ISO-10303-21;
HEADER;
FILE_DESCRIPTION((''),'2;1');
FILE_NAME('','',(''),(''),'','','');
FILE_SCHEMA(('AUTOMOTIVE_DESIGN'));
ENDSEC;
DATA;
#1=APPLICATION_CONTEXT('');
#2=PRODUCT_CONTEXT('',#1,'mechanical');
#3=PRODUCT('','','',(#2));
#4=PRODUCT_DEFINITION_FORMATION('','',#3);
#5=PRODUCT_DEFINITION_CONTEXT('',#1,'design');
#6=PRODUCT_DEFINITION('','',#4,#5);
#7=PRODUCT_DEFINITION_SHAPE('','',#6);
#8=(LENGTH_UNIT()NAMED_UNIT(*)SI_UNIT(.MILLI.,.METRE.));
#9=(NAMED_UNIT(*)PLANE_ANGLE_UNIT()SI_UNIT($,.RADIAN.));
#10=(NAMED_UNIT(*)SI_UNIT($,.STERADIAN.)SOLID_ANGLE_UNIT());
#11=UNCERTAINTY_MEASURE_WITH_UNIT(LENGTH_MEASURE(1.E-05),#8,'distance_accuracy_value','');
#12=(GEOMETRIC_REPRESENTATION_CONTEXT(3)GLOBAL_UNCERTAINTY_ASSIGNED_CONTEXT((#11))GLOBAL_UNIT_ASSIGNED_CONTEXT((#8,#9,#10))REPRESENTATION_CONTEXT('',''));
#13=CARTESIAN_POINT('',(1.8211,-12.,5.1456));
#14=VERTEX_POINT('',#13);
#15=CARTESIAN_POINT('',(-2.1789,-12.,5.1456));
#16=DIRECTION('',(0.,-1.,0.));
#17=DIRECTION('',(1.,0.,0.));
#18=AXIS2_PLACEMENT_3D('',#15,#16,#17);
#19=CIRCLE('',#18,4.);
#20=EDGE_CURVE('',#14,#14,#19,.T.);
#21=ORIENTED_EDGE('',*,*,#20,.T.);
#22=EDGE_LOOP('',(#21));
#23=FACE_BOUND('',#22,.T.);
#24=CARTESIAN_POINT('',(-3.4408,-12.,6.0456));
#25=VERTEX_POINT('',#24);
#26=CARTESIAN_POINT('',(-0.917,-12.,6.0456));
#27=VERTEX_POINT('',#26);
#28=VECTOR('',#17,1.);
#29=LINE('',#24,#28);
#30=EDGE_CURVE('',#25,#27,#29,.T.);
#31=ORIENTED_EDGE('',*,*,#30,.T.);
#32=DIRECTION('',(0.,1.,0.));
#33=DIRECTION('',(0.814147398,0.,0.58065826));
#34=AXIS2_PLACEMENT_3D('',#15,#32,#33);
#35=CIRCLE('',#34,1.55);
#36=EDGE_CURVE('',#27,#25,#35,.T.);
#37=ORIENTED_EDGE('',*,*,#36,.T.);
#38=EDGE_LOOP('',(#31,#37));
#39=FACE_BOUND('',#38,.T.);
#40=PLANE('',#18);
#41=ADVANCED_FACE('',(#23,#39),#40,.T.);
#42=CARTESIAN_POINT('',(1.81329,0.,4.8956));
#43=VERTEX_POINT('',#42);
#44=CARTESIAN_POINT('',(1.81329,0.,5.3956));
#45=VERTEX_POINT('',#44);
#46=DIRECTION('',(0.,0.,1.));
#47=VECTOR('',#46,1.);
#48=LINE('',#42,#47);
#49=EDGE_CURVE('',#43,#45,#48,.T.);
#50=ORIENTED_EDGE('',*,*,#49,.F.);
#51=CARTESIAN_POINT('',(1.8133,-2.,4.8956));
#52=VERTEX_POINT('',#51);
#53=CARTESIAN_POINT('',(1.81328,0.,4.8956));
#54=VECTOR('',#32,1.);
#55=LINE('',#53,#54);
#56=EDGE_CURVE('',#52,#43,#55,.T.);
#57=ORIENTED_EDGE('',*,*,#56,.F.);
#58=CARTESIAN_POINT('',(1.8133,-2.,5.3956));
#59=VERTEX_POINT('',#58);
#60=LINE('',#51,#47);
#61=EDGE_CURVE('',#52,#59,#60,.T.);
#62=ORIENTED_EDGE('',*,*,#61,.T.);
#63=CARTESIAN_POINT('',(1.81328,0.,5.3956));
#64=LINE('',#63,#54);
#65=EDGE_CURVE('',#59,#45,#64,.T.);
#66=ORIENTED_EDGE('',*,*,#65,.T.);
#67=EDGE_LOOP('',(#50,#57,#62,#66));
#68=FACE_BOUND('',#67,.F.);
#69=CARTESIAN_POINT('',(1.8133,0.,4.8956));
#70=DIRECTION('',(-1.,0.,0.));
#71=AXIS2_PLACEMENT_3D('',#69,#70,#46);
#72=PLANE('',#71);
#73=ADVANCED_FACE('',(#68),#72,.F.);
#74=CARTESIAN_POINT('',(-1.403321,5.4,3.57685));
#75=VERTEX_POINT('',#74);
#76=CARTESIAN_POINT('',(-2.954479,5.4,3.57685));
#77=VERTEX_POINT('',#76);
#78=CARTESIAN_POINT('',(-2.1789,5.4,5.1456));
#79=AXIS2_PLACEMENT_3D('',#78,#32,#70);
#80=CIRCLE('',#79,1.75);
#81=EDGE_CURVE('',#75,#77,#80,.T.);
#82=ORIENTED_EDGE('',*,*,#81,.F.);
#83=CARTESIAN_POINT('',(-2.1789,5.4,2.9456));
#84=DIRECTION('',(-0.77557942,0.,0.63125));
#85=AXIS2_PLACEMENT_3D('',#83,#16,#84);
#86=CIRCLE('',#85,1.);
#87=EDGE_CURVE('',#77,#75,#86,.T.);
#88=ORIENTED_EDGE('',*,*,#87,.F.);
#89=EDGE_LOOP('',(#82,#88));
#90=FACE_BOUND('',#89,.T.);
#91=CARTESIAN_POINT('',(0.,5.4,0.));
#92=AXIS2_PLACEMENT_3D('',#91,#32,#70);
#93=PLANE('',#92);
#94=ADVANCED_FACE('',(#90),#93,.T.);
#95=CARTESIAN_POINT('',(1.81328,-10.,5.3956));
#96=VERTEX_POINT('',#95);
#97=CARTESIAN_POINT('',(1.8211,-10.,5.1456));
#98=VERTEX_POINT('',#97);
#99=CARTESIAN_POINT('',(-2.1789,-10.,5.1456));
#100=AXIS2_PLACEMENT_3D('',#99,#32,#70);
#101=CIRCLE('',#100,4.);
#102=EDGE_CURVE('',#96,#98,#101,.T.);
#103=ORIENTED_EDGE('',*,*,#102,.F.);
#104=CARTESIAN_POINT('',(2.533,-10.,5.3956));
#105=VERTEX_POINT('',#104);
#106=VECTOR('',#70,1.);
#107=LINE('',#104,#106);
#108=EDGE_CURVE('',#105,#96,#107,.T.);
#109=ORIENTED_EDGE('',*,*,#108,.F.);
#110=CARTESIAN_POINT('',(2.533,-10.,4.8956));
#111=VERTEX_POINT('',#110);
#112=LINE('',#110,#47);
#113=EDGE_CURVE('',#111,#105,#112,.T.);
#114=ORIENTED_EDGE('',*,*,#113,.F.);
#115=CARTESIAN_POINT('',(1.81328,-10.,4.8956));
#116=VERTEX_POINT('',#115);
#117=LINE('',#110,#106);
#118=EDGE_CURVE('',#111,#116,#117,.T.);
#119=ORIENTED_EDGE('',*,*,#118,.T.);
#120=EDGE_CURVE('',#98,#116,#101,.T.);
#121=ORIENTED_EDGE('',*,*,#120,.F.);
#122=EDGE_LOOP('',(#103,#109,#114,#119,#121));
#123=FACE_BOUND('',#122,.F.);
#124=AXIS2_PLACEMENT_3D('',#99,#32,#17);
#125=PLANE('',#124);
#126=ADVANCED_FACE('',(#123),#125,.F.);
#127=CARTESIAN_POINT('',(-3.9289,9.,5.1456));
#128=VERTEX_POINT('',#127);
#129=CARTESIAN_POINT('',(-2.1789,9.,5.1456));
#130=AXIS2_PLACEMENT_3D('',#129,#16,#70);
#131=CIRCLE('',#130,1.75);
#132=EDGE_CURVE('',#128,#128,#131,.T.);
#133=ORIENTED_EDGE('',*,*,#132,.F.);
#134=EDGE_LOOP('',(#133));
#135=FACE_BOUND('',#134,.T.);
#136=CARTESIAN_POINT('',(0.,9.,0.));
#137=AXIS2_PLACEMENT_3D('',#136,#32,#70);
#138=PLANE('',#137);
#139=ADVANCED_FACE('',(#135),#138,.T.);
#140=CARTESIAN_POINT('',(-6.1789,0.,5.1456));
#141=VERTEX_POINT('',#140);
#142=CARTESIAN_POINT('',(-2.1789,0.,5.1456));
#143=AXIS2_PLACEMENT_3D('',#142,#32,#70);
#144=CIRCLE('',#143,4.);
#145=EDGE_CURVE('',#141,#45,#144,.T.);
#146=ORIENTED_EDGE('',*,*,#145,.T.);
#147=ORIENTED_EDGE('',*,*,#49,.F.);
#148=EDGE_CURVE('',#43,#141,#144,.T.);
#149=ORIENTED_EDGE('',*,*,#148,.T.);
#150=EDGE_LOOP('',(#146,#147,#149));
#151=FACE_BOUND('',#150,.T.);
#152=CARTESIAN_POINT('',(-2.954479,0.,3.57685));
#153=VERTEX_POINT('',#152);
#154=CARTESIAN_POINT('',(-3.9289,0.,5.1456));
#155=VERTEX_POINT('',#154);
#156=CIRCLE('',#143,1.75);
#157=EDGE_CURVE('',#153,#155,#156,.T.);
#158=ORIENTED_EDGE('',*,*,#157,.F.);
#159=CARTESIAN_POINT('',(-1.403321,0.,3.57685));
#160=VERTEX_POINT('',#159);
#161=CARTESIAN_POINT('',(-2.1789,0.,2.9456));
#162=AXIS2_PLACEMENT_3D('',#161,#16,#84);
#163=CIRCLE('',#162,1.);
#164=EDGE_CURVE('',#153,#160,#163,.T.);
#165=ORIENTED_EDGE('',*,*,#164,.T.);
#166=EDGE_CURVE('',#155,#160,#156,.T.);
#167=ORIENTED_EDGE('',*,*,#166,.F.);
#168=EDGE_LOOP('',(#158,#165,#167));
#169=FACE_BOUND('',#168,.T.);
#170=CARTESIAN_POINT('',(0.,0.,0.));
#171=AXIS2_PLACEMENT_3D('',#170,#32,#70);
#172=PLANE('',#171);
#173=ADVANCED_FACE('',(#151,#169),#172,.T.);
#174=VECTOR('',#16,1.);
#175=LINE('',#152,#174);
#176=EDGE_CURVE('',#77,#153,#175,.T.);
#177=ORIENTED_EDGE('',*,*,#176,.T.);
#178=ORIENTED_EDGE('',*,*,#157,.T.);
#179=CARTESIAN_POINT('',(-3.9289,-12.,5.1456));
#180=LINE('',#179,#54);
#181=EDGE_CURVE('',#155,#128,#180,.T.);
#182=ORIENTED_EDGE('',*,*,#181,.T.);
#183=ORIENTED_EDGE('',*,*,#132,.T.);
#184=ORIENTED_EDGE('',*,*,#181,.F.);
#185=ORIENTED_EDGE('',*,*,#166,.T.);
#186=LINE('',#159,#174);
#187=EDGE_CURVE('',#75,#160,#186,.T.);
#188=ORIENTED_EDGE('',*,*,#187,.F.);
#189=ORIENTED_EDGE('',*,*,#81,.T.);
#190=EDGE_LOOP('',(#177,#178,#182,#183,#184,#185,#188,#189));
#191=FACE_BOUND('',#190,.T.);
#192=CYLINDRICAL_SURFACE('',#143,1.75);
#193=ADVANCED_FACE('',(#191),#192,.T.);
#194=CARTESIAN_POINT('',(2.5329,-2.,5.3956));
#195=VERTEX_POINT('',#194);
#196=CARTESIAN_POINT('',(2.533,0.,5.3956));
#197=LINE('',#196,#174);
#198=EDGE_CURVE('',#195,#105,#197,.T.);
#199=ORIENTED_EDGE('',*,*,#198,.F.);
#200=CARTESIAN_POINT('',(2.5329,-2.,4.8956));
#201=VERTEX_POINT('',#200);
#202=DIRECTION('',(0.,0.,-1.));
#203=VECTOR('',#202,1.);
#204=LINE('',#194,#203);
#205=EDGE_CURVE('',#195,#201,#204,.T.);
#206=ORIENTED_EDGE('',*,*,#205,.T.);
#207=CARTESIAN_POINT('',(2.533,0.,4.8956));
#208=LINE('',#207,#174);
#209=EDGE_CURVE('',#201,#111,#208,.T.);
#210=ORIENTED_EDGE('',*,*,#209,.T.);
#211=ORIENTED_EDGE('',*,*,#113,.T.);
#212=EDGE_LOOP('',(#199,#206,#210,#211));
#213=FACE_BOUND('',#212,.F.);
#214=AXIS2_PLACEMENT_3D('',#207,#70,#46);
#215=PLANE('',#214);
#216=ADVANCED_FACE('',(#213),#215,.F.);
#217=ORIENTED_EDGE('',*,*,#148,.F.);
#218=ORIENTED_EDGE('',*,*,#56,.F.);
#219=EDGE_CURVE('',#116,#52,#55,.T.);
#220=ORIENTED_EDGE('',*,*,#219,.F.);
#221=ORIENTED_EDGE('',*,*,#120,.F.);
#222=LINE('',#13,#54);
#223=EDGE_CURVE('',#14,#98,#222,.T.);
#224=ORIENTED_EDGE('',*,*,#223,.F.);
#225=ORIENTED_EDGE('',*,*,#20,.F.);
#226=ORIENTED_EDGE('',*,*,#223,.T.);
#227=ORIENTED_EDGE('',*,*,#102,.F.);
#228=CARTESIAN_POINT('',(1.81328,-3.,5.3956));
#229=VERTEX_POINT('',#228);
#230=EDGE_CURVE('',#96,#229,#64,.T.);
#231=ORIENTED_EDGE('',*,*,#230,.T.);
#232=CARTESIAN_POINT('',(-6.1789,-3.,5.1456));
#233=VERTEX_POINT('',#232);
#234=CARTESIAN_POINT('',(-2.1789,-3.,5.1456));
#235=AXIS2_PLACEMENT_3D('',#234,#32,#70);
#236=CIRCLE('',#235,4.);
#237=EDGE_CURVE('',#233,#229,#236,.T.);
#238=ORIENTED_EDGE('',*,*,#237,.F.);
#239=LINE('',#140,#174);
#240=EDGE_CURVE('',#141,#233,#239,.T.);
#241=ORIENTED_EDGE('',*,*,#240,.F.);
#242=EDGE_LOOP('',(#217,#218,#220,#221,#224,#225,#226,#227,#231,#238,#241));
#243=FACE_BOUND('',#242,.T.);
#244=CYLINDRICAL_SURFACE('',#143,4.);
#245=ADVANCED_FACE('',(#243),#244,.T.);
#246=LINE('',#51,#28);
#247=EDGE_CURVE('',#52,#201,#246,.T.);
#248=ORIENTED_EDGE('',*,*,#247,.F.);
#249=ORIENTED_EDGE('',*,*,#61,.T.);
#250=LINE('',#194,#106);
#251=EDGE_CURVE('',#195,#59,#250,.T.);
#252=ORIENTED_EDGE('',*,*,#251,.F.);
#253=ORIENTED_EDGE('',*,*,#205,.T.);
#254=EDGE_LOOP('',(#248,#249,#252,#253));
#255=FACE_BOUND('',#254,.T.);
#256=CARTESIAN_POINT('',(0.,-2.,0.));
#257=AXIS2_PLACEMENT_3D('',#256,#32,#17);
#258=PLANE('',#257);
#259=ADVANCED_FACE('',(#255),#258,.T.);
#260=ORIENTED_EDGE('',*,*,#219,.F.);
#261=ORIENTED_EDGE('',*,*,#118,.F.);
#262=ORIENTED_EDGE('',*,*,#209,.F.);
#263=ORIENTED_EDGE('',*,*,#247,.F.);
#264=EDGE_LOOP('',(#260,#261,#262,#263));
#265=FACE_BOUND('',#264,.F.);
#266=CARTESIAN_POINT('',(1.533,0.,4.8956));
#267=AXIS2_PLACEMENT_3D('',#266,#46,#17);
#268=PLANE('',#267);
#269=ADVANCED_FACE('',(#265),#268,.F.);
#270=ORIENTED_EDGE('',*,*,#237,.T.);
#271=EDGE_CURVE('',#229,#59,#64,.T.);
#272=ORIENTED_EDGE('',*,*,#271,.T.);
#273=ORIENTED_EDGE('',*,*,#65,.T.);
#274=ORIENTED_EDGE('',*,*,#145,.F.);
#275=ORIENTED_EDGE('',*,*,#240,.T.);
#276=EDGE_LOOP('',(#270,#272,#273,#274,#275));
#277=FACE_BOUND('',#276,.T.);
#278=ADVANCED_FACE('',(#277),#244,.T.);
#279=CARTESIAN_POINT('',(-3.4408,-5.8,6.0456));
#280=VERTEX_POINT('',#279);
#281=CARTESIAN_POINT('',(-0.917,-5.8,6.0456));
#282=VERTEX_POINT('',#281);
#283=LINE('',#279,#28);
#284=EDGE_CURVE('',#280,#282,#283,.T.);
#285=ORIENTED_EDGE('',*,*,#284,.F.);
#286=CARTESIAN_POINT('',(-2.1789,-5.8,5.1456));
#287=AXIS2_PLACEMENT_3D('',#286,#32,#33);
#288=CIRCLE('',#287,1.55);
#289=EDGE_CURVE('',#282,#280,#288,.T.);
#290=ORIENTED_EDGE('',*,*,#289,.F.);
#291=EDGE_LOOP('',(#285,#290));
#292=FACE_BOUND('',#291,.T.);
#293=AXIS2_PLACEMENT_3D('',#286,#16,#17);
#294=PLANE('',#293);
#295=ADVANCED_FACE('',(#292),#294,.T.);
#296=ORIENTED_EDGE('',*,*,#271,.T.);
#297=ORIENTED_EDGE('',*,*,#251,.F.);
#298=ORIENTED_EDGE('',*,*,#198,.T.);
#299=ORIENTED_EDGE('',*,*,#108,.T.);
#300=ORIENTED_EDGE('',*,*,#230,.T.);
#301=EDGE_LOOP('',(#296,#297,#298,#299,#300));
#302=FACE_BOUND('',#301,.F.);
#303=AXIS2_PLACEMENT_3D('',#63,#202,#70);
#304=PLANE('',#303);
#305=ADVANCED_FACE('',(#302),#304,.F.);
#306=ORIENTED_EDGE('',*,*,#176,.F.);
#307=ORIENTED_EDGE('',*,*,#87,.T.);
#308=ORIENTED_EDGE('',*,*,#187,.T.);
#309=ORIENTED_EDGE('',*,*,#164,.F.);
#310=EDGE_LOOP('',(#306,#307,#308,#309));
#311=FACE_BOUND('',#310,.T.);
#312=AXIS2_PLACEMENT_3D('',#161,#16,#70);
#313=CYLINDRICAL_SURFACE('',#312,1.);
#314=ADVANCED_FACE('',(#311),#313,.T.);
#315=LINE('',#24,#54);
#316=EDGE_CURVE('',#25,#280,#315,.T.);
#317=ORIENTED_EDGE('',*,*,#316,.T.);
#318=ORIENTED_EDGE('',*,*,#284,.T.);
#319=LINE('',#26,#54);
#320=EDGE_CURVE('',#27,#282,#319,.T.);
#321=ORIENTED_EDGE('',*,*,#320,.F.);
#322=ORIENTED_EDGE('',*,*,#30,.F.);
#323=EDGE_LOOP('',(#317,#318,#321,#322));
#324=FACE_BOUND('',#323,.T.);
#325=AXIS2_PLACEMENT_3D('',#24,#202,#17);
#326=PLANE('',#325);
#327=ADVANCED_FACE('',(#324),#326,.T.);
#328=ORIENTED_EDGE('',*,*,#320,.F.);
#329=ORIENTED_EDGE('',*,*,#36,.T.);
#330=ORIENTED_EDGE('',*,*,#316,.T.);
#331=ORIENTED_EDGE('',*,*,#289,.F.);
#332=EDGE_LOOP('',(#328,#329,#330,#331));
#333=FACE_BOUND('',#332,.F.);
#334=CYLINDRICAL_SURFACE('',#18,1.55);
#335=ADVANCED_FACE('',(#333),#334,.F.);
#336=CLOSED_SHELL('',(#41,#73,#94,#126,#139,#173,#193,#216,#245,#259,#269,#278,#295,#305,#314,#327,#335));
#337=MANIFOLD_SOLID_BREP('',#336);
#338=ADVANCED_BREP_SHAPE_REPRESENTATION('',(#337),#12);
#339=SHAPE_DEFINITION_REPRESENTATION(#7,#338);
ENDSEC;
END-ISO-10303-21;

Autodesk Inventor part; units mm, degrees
ref_plane "YZ Plane" through (0, 0, 0) normal (1, 0, 0) x (0, 1, 0)
ref_plane "XZ Plane" through (0, 0, 0) normal (0, 1, 0) x (-1, 0, 0)
ref_plane "XY Plane" through (0, 0, 0) normal (0, 0, 1) x (1, 0, 0)
sketch "Sketch1" plane through (0, 0, 0) normal (0, 1, 0) x (-1, 0, 0)
  circle A0 centre (2.1789, 5.1456) radius 4
  circle A1 centre (2.1789, 2.9456) radius 1
  circle A2 centre (2.1789, 5.1456) radius 1.75
  point P0 (0, 0)
  dimension "d0" = 8
  dimension "d1" = 2
  dimension "d3" = 3.5
  dimension "d4" = 0
  dimension "d5" = 0
  dimension "d6" = 0
  dimension "d17" = 2.2
extrude "Extrusion1" add sketch "Sketch1" against normal blind 3 contours A0 | A1 A2 | A2 A1 | A1 A2
extrude "Extrusion2" add sketch "Sketch1" along normal blind 5.4 contours A1 A2 | A2 A1 picked at (1.7556, 3.0976) picked at (2.385, 3.5861)
extrude "Extrusion3" add sketch "Sketch1" along normal blind 9 and the other way blind 12 contours A2 A1 | A1 A2 picked at (2.385, 3.5861) picked at (2.2193, 5.9034)
sketch "Sketch2" plane through (-2.1789, -12, 5.1456) normal (0, -1, 0) x (1, 0, 0)
  circle A0 centre (0, 0) radius 4
  circle A1 centre (0, 0) radius 1.55
  line L0 (-1.2619, 0.9) -> (1.2619, 0.9)
  circle A2 centre (0, 0) radius 4 projected
  point P0 (2.1789, -5.1456)
  dimension "d18" = 8
  dimension "d19" = 3.1
  dimension "d20" = 2.45
extrude "Extrusion4" add sketch "Sketch2" against normal blind 9 contours A0 | A1 L0 | L0 A1
extrude "Extrusion5" cut sketch "Sketch2" against normal blind 6.2 contours A1 L0 picked at (-0.0386, 0.0848)
sketch "Sketch3" plane through (-2.1789, 0, 5.1456) normal (0, 1, 0) x (1, 0, 0)
  line L0 (3.7119, 0.25) -> (4.7119, 0.25)
  line L1 (4.7119, 0.25) -> (4.7119, -0.25)
  line L2 (4.7119, -0.25) -> (3.7119, -0.25)
  line L3 (3.7119, -0.25) -> (3.7119, 0.25)
  circle A0 centre (0, 0) radius 4 projected
  point P0 (2.1789, 5.1456)
  dimension "d25" = 0.5
  dimension "d26" = 0.25
  dimension "d27" = 0.25
  dimension "d30" = 1
extrude "Extrusion6" add sketch "Sketch3" against normal blind 10 contours L0 A0 L2 L3 | L0 L1 L2 A0 picked at (3.8079, 0)
sketch "Sketch4" plane through (0, 0, 0) normal (0, 1, 0) x (1, 0, 0)
  line L0 (1.8133, -4.8956) -> (2.5329, -4.8956) projected
  line L1 (2.5329, -5.3956) -> (1.8133, -5.3956) projected
  line L2 (2.5329, -4.8956) -> (1.8133, -4.8956)
  line L3 (1.8133, -4.8956) -> (1.8133, -5.3956)
  line L4 (1.8133, -5.3956) -> (2.5329, -5.3956)
  line L5 (2.5329, -5.3956) -> (2.5329, -4.8956)
  point P0 (0, 0)
extrude "Extrusion7" cut sketch "Sketch4" against normal blind 2
properties part number "kolo"
